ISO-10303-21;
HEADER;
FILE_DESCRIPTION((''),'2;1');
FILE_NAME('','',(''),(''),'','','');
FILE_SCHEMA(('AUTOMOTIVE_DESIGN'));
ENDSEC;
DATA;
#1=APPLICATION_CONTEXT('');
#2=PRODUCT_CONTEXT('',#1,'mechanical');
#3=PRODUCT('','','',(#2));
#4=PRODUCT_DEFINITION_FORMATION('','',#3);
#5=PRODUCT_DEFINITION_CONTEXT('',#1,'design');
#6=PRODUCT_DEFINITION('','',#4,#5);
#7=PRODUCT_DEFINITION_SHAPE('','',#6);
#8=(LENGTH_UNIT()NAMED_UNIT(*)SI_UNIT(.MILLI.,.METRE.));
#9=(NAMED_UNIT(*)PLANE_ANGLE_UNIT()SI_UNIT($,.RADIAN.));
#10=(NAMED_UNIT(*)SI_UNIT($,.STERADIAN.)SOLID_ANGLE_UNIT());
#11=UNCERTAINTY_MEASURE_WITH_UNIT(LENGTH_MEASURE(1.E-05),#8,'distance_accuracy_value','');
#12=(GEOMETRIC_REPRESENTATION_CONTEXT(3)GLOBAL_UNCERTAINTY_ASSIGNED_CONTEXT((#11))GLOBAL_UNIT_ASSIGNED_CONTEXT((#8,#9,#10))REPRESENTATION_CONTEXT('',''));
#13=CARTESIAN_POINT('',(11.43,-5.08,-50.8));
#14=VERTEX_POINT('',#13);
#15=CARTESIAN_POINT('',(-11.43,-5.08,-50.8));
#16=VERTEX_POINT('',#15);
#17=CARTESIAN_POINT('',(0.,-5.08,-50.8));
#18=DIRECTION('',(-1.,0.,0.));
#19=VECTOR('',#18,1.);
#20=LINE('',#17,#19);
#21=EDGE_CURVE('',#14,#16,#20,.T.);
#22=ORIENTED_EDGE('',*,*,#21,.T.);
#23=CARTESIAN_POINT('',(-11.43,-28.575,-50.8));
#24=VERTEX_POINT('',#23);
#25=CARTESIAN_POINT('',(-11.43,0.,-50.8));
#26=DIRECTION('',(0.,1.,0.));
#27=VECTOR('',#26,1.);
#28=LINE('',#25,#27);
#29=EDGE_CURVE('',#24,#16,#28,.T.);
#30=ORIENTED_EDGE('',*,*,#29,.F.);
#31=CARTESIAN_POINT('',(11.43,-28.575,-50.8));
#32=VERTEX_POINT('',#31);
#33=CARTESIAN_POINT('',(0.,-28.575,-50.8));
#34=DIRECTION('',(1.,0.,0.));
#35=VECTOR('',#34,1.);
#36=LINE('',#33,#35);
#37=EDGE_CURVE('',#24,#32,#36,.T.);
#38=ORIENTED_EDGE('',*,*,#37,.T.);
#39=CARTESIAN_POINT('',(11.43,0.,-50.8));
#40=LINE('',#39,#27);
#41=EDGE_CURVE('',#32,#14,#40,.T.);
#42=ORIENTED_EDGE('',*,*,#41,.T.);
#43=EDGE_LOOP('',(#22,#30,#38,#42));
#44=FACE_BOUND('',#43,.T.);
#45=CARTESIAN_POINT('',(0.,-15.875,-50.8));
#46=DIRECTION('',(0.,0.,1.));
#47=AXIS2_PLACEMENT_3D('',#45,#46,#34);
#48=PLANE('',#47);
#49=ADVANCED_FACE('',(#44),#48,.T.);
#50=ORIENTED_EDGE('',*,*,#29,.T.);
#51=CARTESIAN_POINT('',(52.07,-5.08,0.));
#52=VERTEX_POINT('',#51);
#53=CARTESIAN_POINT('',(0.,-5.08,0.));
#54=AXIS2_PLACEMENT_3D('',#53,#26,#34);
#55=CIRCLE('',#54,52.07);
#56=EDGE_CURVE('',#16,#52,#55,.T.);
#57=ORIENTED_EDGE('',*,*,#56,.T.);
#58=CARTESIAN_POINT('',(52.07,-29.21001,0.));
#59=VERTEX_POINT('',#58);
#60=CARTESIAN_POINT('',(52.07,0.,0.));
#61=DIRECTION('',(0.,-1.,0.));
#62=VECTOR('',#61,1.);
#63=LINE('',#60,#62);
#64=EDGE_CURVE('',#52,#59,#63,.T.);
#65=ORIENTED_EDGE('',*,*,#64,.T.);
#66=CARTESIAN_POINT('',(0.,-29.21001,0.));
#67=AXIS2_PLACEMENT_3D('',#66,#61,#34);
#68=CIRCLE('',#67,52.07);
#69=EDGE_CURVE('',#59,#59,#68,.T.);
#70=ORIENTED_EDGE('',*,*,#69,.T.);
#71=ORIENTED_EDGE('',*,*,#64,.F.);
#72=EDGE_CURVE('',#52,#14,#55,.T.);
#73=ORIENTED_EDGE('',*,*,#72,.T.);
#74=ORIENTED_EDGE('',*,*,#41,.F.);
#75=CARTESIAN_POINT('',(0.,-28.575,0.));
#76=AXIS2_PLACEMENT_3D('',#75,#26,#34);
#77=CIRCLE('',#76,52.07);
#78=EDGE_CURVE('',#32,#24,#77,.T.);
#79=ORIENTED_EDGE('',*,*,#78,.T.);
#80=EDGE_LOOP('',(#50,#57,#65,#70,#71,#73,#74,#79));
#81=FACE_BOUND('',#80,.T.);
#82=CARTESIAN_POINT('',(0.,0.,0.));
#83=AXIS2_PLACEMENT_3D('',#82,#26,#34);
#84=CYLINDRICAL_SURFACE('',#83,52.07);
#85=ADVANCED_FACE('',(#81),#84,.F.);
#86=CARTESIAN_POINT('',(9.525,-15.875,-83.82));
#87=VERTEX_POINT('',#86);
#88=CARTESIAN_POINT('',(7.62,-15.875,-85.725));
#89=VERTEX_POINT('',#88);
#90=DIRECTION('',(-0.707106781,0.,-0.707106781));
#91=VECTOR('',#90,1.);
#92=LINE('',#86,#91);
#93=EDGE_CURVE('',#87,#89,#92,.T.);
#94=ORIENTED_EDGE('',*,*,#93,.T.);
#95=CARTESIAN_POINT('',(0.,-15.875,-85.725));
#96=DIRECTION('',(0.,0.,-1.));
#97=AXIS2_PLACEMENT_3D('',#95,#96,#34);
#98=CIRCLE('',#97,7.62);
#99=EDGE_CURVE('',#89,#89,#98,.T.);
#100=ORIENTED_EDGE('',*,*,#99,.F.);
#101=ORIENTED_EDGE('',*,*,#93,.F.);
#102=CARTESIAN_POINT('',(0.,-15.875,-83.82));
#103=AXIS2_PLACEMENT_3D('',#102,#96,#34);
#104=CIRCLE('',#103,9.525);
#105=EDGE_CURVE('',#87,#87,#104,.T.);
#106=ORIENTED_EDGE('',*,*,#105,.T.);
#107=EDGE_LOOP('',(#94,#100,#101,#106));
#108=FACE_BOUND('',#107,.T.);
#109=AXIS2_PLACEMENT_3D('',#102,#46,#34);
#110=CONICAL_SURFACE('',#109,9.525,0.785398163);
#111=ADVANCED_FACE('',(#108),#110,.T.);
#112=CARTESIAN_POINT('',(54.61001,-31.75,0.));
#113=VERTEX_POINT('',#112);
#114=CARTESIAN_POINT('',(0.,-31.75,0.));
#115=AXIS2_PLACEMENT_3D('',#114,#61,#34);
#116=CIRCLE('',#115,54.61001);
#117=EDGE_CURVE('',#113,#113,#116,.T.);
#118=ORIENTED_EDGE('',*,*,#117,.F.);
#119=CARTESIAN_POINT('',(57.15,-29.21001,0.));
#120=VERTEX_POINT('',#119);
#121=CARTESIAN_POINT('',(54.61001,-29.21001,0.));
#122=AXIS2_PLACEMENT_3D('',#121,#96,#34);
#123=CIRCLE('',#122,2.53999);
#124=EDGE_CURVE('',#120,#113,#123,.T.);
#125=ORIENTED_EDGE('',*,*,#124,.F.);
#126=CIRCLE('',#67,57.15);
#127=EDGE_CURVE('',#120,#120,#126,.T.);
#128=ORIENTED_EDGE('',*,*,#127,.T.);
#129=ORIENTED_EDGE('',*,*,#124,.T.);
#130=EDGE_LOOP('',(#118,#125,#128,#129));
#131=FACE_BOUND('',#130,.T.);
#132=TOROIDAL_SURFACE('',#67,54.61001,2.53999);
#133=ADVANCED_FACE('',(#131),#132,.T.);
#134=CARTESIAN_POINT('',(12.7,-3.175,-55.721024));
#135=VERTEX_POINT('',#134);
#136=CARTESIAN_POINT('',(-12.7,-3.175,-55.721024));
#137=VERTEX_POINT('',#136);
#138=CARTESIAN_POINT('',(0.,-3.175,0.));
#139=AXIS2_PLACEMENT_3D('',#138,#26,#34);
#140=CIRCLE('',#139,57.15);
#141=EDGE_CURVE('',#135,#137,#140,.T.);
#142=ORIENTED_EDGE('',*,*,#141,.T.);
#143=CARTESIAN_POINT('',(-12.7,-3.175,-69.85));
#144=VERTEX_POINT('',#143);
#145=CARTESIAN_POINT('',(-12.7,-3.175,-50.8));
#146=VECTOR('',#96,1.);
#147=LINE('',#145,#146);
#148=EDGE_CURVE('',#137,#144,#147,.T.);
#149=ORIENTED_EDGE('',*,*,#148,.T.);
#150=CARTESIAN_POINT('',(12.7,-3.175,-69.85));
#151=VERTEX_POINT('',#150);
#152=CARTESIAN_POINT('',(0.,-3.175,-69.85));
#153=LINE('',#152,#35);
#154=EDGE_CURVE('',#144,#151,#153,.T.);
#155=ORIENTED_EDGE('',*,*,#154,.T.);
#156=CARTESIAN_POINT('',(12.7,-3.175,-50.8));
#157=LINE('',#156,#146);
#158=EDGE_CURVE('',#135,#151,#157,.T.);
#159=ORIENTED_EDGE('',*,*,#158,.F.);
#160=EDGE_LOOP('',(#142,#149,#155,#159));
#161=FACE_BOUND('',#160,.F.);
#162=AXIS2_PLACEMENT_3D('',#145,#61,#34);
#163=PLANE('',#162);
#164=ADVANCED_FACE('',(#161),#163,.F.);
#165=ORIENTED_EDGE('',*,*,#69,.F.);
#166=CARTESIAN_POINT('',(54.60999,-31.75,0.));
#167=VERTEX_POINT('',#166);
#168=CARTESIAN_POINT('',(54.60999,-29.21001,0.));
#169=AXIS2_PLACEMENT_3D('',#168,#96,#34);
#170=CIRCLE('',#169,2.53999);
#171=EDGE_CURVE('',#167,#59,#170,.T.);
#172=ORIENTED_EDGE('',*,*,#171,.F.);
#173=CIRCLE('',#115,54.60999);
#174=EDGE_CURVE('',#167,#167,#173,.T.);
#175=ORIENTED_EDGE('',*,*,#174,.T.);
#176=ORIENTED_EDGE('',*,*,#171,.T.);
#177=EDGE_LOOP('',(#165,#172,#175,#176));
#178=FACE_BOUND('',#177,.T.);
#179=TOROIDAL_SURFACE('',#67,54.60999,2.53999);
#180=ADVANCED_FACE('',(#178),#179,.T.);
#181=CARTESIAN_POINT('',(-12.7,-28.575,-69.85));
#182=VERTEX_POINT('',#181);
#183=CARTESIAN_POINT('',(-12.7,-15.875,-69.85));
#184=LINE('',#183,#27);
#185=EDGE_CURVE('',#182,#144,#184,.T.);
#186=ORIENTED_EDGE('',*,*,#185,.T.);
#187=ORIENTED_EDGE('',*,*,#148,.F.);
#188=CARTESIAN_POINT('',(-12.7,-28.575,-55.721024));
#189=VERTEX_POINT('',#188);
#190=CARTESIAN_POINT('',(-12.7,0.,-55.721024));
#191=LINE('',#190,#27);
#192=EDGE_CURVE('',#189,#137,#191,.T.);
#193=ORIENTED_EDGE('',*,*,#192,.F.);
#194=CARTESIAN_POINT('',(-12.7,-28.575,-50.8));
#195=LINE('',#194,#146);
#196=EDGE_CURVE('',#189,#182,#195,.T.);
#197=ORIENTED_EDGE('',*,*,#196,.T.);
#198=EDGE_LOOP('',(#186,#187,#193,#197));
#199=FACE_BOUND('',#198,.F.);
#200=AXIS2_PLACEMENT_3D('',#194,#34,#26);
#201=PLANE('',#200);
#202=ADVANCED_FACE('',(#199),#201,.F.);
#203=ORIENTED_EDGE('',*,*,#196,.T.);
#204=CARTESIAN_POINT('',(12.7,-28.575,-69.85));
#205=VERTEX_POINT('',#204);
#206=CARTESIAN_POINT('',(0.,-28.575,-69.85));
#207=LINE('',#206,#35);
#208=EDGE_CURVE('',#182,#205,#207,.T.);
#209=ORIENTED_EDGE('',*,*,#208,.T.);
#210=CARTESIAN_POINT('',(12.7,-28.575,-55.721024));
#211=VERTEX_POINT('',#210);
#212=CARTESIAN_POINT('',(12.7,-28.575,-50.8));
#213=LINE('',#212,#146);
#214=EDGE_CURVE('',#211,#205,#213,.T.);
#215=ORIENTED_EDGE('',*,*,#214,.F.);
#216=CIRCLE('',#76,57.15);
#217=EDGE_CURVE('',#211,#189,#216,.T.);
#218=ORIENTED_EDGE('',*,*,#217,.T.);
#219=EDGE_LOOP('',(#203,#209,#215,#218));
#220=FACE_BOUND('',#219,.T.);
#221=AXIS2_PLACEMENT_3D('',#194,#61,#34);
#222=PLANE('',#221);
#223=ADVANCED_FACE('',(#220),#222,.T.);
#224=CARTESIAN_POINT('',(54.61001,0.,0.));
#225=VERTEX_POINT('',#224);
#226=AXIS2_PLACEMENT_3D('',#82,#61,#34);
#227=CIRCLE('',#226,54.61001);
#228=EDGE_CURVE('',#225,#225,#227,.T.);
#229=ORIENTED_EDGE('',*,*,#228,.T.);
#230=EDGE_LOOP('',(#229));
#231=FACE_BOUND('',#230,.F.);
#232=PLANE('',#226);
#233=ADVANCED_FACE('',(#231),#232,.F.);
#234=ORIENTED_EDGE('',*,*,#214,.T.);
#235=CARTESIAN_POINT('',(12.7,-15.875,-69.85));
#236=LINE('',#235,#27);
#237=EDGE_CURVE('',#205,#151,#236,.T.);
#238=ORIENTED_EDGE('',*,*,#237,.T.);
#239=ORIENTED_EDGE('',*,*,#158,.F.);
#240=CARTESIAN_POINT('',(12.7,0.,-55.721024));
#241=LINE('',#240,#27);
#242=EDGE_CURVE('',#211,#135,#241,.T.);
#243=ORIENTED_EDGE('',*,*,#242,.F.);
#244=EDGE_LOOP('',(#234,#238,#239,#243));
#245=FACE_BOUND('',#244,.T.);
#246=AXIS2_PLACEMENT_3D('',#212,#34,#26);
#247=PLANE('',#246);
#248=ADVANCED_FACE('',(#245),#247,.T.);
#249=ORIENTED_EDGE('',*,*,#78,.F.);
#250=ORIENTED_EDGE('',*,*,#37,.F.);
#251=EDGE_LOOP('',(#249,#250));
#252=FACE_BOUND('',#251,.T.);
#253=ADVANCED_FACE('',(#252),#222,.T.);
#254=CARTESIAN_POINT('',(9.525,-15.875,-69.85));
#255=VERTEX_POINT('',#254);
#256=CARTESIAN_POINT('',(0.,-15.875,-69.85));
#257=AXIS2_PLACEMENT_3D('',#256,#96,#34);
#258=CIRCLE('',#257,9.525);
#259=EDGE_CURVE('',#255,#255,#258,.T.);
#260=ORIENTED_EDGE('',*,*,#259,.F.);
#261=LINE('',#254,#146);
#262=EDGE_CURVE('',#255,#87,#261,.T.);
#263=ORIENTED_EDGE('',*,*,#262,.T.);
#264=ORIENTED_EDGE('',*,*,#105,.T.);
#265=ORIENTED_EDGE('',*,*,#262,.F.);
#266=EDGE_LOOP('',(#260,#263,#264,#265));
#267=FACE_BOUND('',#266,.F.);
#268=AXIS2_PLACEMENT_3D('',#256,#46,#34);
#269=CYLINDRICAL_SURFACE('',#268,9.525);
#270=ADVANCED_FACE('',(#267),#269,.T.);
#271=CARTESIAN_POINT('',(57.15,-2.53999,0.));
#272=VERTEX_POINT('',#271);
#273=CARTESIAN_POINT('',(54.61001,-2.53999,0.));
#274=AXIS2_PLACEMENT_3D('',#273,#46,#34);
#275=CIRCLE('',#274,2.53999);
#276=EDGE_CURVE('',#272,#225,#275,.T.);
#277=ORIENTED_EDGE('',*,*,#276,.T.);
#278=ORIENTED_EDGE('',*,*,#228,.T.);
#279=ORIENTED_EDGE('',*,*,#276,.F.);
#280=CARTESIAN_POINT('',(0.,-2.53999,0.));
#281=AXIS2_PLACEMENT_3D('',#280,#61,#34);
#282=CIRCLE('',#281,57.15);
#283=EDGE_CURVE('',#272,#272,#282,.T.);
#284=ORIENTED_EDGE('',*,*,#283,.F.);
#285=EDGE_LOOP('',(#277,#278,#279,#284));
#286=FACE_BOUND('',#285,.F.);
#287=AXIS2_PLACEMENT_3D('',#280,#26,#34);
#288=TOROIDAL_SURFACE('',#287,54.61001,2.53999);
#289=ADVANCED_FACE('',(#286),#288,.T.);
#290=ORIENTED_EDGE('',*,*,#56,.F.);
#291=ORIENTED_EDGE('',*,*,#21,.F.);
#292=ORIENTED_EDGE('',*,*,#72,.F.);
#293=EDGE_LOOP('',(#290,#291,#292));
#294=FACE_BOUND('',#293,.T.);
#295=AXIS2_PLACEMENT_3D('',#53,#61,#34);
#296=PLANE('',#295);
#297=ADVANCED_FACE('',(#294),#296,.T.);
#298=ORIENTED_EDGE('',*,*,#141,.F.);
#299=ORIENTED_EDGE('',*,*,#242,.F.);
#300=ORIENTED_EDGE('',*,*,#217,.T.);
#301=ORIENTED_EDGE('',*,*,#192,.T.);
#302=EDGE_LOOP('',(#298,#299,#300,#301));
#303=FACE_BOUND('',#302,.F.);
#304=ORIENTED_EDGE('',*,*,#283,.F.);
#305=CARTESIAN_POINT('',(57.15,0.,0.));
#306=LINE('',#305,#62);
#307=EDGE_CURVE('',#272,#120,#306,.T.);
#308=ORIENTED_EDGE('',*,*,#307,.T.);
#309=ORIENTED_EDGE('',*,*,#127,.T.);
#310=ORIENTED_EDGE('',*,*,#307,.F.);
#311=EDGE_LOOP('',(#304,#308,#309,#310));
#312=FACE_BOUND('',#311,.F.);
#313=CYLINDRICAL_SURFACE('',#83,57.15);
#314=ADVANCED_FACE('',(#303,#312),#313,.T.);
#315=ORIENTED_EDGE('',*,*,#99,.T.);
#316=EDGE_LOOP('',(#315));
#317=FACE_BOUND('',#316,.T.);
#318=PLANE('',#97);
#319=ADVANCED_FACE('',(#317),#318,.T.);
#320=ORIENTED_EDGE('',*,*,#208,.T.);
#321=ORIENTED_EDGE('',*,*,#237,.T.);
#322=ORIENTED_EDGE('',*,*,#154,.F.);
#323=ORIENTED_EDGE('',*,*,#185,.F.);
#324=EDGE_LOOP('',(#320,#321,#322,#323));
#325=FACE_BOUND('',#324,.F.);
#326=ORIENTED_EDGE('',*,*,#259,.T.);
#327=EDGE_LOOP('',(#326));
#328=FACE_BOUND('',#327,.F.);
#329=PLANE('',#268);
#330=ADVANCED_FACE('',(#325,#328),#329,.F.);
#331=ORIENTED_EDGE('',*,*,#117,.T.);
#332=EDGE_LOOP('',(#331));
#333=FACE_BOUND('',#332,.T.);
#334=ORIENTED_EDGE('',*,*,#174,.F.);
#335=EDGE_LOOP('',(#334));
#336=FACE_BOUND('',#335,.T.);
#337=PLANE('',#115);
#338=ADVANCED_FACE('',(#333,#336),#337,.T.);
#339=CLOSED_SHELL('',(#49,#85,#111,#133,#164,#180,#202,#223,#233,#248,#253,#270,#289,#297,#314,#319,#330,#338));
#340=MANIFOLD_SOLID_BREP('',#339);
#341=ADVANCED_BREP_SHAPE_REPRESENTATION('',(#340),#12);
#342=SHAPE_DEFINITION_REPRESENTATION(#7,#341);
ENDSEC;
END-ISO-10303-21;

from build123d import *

# Parameters (mm, degrees)
F0_R     = 57.15
F1_DEPTH = 31.75
F2_T     = -5.08
F4_W     = 25.4
F4_H     = 25.4
F5_DEPTH = 19.05
F6_R     = 2.53999
F7_R     = 9.525
F8_DEPTH = 15.875
F9_SIZE  = 1.905


# Not quite as in the source:
# - a fillet or chamfer is up to 0.001 mm smaller than in the source, because OpenCascade refuses the exact size


with BuildPart() as f1:
    # F0 (on Front) → F1 (new body)
    with BuildSketch(Plane.XZ):
        Circle(F0_R)
    extrude(amount=F1_DEPTH)

    # F2
    f2_openings = [f1.faces().sort_by_distance(p)[0] for p in [
        (0, -31.75, 0),
    ]]
    offset(amount=F2_T, openings=f2_openings)

    # F4 (on offset) → F5 (join)
    with BuildSketch(Plane.XY.offset(-50.8)):
        with Locations((0, -15.875)):
            Rectangle(F4_W, F4_H)
    extrude(amount=-F5_DEPTH)

    # F6 (radius 2.54 in the source; OpenCascade refuses exactly that, so slightly less here)
    f6_edges = [f1.edges().sort_by_distance(p)[0] for p in [
        (-57.15, -31.75, 0),
        (-52.07, -31.75, 0),
        (-57.15, 0, 0),
    ]]
    fillet(f6_edges, radius=F6_R)

    # F7 (on face) → F8 (join)
    with BuildSketch(Plane(origin=(0, 0, -69.85), x_dir=(1, 0, 0), z_dir=(0, 0, -1))):
        with Locations((0, 15.875)):
            Circle(F7_R)
    extrude(amount=F8_DEPTH)

    # F9
    f9_edges = [f1.edges().sort_by_distance(p)[0] for p in [
        (-9.525, -15.875, -85.725),
    ]]
    chamfer(f9_edges, length=F9_SIZE)


solid = f1.part
